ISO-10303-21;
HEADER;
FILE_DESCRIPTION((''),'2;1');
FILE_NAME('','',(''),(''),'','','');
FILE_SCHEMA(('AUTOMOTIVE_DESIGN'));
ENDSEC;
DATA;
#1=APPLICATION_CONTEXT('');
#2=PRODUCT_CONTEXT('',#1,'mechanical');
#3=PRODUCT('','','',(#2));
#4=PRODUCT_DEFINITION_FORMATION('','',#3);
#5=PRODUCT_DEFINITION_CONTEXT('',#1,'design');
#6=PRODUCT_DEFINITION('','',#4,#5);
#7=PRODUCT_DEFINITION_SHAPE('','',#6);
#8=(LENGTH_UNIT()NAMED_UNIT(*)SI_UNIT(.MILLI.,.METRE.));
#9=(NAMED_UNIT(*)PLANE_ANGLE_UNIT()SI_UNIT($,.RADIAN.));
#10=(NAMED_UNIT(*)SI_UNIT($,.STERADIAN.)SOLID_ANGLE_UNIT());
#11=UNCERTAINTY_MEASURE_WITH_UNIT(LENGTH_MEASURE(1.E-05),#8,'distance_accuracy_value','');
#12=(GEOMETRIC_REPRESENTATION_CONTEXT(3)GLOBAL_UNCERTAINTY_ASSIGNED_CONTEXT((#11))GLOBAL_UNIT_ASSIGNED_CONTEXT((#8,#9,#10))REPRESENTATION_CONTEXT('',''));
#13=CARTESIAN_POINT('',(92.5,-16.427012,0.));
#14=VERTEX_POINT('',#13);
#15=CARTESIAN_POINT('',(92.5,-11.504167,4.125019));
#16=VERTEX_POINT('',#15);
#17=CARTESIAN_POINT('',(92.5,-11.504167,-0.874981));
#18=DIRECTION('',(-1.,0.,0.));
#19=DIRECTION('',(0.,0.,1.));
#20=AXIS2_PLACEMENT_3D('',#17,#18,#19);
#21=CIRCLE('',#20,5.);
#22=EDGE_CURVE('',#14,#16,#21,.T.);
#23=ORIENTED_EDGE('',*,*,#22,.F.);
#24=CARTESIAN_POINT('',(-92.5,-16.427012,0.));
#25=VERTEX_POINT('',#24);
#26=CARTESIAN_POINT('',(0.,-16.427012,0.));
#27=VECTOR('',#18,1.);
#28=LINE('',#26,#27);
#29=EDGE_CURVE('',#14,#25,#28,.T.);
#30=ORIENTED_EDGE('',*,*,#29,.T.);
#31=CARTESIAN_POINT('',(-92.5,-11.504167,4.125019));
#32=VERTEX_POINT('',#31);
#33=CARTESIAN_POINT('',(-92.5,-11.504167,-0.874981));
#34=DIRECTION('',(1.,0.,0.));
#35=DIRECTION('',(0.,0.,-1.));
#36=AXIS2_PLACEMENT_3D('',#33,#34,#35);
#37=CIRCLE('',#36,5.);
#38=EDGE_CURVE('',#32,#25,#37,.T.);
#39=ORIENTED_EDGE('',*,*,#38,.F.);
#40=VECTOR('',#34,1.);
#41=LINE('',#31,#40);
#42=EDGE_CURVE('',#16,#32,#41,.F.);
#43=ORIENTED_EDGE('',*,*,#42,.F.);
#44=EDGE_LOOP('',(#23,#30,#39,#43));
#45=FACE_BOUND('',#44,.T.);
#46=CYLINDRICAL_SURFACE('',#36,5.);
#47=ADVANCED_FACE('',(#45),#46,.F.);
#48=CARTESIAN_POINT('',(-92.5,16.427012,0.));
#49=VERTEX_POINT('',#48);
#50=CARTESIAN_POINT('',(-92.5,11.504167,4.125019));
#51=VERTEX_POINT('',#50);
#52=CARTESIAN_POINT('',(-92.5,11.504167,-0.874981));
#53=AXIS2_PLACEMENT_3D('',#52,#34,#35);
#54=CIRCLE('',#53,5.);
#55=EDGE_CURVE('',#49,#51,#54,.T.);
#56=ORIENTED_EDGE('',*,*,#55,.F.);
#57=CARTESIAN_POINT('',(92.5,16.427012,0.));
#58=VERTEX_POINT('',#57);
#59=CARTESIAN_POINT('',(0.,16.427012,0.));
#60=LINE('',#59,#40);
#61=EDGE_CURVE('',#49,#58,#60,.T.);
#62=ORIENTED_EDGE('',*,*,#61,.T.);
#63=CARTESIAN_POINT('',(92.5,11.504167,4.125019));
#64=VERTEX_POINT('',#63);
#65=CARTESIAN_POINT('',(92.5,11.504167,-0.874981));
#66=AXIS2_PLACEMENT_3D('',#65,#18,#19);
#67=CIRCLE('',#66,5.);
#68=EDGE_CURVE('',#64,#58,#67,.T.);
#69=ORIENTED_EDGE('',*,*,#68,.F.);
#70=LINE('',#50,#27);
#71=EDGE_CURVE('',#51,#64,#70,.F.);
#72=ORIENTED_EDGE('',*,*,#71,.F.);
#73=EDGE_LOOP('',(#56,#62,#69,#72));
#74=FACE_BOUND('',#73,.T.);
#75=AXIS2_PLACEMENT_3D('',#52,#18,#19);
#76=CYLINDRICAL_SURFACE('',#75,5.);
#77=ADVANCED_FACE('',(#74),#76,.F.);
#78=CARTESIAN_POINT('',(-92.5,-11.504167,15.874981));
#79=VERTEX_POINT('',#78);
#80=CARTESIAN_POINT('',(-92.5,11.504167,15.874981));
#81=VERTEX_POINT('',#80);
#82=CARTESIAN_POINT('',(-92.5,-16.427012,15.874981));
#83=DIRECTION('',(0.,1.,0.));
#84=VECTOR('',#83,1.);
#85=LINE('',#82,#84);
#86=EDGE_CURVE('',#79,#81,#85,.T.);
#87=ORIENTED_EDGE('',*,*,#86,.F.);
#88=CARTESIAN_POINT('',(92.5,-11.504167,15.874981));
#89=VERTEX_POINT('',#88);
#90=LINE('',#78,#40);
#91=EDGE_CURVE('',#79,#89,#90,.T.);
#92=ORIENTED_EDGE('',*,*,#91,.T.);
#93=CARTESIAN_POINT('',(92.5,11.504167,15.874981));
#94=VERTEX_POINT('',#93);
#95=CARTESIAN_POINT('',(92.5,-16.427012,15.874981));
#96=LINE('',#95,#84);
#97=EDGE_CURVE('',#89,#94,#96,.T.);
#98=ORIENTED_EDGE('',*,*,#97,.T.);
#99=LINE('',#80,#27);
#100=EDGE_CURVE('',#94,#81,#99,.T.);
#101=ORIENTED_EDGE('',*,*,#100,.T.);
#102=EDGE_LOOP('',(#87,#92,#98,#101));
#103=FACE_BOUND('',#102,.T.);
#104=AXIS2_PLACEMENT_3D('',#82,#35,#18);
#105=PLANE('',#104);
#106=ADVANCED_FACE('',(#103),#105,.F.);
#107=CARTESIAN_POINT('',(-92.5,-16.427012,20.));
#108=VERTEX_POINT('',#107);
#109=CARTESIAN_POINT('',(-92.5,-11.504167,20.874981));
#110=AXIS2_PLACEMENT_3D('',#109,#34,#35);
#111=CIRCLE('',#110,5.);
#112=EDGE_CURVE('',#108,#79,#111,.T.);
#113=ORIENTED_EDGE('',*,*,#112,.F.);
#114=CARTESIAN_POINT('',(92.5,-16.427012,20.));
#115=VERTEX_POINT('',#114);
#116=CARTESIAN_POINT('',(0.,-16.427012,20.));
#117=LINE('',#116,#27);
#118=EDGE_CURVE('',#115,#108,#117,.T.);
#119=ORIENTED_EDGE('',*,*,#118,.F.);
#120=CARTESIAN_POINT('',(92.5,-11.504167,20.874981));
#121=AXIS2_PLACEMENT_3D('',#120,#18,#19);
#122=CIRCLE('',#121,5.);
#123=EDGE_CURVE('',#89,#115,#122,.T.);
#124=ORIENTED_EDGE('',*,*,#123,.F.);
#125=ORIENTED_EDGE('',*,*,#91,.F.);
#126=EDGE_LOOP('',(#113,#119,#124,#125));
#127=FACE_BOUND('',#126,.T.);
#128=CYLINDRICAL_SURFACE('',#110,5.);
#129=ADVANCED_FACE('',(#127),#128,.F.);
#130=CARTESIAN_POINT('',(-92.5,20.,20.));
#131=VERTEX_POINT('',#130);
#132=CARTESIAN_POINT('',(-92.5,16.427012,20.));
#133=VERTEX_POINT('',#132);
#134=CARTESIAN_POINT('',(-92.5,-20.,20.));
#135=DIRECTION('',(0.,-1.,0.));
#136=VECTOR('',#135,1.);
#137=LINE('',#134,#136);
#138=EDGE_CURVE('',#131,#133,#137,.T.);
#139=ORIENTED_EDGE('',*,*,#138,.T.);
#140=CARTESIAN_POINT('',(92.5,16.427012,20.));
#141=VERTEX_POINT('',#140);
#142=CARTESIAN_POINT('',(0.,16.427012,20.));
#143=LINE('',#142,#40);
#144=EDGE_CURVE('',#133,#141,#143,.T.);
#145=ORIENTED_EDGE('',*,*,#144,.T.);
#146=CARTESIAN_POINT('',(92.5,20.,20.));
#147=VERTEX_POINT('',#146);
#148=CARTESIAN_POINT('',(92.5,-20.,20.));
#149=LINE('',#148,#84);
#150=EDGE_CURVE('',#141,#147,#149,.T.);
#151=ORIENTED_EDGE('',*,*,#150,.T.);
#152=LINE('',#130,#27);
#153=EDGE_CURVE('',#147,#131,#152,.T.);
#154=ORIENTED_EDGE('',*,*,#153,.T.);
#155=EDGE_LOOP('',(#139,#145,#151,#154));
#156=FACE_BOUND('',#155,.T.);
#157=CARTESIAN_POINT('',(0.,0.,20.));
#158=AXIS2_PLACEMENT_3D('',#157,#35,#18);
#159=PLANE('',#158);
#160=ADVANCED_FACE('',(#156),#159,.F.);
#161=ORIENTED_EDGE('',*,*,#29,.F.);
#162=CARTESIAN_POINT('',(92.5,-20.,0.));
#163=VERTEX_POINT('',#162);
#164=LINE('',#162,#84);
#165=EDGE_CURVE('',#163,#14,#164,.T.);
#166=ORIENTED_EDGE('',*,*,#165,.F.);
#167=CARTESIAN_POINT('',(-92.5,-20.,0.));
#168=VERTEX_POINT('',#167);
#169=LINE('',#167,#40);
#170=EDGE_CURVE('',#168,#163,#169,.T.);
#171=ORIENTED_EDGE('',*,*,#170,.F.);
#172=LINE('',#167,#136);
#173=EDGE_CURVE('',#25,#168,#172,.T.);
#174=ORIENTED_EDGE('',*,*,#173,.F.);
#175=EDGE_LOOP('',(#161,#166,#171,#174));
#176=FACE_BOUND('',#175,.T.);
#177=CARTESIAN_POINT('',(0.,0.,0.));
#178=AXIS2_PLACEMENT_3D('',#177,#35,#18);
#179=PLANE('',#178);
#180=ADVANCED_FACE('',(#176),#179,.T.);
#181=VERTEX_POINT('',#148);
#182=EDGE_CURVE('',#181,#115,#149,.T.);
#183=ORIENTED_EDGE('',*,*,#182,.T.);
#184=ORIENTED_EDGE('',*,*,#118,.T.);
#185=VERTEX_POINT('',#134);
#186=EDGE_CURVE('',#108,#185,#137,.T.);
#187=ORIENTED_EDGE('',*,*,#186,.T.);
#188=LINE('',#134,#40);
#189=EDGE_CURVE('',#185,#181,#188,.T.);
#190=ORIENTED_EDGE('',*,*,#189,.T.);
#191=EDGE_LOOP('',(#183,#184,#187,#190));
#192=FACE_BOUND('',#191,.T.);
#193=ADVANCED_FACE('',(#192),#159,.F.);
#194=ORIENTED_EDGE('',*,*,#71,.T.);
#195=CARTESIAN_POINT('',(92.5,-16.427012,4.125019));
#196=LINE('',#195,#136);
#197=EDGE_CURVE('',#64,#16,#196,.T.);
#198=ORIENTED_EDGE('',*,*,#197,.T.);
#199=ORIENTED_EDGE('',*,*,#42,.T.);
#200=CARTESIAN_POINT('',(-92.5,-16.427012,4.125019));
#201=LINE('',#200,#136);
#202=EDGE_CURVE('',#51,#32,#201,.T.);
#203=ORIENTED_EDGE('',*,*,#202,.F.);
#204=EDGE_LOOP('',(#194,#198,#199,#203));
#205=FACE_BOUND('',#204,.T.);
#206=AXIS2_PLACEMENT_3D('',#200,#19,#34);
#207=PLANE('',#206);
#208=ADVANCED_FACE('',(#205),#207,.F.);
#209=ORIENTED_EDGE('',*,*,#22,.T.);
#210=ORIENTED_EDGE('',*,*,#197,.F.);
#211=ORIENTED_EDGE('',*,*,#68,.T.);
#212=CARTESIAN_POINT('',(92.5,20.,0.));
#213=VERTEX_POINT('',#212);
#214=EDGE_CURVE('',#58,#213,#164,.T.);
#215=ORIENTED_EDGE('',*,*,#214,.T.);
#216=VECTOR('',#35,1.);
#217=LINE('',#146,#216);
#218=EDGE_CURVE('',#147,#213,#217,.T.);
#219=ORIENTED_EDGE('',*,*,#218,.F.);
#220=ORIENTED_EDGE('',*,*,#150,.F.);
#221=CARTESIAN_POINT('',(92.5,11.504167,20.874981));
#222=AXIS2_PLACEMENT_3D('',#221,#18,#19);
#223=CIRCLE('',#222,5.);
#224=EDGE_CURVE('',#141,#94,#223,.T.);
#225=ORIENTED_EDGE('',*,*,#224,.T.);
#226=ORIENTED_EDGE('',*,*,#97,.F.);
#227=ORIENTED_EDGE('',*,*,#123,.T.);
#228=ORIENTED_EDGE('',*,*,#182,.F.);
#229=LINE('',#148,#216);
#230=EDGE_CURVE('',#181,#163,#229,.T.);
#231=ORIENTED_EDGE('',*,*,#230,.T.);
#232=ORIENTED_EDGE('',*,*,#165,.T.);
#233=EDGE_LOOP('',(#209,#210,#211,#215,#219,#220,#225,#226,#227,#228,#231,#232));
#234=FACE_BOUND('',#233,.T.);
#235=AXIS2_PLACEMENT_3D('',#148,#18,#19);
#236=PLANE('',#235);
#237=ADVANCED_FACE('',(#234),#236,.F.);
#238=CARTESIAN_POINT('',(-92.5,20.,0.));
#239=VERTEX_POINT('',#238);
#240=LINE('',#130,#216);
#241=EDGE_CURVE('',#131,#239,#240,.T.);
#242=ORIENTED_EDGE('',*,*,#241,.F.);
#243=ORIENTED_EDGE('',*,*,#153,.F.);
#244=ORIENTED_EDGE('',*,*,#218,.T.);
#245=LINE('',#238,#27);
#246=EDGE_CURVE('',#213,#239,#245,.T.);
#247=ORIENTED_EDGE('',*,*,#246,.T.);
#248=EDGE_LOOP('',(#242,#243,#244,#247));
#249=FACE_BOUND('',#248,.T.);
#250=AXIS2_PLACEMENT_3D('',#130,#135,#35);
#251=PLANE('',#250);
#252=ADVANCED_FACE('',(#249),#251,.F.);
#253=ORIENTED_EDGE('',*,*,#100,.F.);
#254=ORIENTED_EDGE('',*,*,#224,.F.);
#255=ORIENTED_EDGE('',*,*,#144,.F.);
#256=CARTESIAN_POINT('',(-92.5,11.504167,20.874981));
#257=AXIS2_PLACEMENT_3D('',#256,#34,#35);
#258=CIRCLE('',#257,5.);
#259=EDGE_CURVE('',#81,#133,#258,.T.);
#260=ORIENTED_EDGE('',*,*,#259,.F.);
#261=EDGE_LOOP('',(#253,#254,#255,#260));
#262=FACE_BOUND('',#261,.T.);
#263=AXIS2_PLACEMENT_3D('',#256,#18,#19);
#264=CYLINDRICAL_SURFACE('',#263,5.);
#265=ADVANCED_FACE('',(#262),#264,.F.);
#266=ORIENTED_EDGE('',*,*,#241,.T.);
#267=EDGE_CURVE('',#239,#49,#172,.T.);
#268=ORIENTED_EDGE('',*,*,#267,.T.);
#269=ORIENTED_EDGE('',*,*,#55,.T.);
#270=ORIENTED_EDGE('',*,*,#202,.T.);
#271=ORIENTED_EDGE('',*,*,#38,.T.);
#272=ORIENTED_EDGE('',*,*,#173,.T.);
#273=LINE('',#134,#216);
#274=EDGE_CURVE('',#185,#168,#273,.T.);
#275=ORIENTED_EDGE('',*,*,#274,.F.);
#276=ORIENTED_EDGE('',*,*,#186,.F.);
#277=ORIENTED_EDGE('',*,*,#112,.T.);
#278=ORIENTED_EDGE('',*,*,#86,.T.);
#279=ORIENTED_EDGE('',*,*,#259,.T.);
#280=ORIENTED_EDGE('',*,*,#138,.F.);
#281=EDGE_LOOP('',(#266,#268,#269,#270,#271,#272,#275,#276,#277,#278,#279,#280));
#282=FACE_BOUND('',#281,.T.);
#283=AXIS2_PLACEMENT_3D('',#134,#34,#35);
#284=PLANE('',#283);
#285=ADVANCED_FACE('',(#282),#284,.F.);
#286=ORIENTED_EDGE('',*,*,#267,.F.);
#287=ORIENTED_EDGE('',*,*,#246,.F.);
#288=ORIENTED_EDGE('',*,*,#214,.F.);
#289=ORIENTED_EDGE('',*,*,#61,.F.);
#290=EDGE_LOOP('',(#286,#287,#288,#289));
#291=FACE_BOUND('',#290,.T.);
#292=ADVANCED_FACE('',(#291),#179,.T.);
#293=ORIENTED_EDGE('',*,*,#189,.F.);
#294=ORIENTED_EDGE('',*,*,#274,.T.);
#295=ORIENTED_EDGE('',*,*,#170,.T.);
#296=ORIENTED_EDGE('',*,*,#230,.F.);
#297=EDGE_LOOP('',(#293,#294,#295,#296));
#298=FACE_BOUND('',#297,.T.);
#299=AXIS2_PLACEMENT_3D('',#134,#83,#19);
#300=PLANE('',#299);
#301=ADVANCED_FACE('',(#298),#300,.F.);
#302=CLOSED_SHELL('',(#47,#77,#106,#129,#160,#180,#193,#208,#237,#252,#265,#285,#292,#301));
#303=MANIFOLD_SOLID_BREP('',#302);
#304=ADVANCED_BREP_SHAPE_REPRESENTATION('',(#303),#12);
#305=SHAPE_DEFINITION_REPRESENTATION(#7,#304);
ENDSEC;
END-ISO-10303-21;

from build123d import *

# Parameters (mm, degrees)
SKETCH1_W           = 185
SKETCH1_H           = 40
BOSS_EXTRUDE1_DEPTH = 20
SKETCH2_W           = 8.25003803
SKETCH2_H           = 32.854024614
CUT_EXTRUDE1_DEPTH  = 188.149672722
FILLET1_R           = 5


with BuildPart() as part:
    # Sketch1 → Boss-Extrude1 (new body)
    with BuildSketch(Plane.XY):
        Rectangle(SKETCH1_W, SKETCH1_H)
    extrude(amount=BOSS_EXTRUDE1_DEPTH)

    # Sketch2 → Cut-Extrude1 (cut, through all)
    with BuildSketch(Plane(origin=(92.5, 0, 0), x_dir=(0, 0, -1), z_dir=(1, 0, 0))):
        with Locations((-20, 0)):
            Rectangle(SKETCH2_W, SKETCH2_H)
        Rectangle(SKETCH2_W, SKETCH2_H)
    extrude(amount=-CUT_EXTRUDE1_DEPTH, mode=Mode.SUBTRACT)

    # Fillet1
    # the kernel refuses this fillet: 5 mm, written as the material it adds along each edge
    with BuildSketch(Plane(origin=(92.5, 16.427012307, 4.125019015), x_dir=(0, 0, -1), z_dir=(-1, 0, 0)), Plane(origin=(92.5, -16.427012307, 15.874980985), x_dir=(0, 0, 1), z_dir=(-1, 0, 0))) as fillet1_piece_1:
        with BuildLine():
            CenterArc((5, 4.922845547), FILLET1_R, 180, 79.921563206)
            Line((0, 4.922845547), (-0.1, 4.922845547))
            Line((-0.1, 4.922845547), (-0.1, 0))
            Line((-0.1, 0), (0, -0.1))
            ThreePointArc((0, -0.1), (2.062509508, -0.1), (4.107519396, -0.098456911))
            Line((4.107519396, -0.098456911), (4.125019015, 0))
        make_face()
    extrude(amount=185)
    with BuildSketch(Plane(origin=(92.5, -16.427012307, 4.125019015), x_dir=(0, 1, 0), z_dir=(-1, 0, 0)), Plane(origin=(92.5, 16.427012307, 15.874980985), x_dir=(0, -1, 0), z_dir=(-1, 0, 0))) as fillet1_piece_2:
        with BuildLine():
            CenterArc((4.922845547, 5), FILLET1_R, 190.078436794, 79.921563206)
            Line((0, 4.125019015), (-0.098456911, 4.107519396))
            ThreePointArc((-0.098456911, 4.107519396), (-0.1, 2.062509508), (-0.1, 0))
            Line((-0.1, 0), (0, -0.1))
            Line((0, -0.1), (4.922845547, -0.1))
            Line((4.922845547, -0.1), (4.922845547, 0))
        make_face()
    extrude(amount=185)


solid = part.part
